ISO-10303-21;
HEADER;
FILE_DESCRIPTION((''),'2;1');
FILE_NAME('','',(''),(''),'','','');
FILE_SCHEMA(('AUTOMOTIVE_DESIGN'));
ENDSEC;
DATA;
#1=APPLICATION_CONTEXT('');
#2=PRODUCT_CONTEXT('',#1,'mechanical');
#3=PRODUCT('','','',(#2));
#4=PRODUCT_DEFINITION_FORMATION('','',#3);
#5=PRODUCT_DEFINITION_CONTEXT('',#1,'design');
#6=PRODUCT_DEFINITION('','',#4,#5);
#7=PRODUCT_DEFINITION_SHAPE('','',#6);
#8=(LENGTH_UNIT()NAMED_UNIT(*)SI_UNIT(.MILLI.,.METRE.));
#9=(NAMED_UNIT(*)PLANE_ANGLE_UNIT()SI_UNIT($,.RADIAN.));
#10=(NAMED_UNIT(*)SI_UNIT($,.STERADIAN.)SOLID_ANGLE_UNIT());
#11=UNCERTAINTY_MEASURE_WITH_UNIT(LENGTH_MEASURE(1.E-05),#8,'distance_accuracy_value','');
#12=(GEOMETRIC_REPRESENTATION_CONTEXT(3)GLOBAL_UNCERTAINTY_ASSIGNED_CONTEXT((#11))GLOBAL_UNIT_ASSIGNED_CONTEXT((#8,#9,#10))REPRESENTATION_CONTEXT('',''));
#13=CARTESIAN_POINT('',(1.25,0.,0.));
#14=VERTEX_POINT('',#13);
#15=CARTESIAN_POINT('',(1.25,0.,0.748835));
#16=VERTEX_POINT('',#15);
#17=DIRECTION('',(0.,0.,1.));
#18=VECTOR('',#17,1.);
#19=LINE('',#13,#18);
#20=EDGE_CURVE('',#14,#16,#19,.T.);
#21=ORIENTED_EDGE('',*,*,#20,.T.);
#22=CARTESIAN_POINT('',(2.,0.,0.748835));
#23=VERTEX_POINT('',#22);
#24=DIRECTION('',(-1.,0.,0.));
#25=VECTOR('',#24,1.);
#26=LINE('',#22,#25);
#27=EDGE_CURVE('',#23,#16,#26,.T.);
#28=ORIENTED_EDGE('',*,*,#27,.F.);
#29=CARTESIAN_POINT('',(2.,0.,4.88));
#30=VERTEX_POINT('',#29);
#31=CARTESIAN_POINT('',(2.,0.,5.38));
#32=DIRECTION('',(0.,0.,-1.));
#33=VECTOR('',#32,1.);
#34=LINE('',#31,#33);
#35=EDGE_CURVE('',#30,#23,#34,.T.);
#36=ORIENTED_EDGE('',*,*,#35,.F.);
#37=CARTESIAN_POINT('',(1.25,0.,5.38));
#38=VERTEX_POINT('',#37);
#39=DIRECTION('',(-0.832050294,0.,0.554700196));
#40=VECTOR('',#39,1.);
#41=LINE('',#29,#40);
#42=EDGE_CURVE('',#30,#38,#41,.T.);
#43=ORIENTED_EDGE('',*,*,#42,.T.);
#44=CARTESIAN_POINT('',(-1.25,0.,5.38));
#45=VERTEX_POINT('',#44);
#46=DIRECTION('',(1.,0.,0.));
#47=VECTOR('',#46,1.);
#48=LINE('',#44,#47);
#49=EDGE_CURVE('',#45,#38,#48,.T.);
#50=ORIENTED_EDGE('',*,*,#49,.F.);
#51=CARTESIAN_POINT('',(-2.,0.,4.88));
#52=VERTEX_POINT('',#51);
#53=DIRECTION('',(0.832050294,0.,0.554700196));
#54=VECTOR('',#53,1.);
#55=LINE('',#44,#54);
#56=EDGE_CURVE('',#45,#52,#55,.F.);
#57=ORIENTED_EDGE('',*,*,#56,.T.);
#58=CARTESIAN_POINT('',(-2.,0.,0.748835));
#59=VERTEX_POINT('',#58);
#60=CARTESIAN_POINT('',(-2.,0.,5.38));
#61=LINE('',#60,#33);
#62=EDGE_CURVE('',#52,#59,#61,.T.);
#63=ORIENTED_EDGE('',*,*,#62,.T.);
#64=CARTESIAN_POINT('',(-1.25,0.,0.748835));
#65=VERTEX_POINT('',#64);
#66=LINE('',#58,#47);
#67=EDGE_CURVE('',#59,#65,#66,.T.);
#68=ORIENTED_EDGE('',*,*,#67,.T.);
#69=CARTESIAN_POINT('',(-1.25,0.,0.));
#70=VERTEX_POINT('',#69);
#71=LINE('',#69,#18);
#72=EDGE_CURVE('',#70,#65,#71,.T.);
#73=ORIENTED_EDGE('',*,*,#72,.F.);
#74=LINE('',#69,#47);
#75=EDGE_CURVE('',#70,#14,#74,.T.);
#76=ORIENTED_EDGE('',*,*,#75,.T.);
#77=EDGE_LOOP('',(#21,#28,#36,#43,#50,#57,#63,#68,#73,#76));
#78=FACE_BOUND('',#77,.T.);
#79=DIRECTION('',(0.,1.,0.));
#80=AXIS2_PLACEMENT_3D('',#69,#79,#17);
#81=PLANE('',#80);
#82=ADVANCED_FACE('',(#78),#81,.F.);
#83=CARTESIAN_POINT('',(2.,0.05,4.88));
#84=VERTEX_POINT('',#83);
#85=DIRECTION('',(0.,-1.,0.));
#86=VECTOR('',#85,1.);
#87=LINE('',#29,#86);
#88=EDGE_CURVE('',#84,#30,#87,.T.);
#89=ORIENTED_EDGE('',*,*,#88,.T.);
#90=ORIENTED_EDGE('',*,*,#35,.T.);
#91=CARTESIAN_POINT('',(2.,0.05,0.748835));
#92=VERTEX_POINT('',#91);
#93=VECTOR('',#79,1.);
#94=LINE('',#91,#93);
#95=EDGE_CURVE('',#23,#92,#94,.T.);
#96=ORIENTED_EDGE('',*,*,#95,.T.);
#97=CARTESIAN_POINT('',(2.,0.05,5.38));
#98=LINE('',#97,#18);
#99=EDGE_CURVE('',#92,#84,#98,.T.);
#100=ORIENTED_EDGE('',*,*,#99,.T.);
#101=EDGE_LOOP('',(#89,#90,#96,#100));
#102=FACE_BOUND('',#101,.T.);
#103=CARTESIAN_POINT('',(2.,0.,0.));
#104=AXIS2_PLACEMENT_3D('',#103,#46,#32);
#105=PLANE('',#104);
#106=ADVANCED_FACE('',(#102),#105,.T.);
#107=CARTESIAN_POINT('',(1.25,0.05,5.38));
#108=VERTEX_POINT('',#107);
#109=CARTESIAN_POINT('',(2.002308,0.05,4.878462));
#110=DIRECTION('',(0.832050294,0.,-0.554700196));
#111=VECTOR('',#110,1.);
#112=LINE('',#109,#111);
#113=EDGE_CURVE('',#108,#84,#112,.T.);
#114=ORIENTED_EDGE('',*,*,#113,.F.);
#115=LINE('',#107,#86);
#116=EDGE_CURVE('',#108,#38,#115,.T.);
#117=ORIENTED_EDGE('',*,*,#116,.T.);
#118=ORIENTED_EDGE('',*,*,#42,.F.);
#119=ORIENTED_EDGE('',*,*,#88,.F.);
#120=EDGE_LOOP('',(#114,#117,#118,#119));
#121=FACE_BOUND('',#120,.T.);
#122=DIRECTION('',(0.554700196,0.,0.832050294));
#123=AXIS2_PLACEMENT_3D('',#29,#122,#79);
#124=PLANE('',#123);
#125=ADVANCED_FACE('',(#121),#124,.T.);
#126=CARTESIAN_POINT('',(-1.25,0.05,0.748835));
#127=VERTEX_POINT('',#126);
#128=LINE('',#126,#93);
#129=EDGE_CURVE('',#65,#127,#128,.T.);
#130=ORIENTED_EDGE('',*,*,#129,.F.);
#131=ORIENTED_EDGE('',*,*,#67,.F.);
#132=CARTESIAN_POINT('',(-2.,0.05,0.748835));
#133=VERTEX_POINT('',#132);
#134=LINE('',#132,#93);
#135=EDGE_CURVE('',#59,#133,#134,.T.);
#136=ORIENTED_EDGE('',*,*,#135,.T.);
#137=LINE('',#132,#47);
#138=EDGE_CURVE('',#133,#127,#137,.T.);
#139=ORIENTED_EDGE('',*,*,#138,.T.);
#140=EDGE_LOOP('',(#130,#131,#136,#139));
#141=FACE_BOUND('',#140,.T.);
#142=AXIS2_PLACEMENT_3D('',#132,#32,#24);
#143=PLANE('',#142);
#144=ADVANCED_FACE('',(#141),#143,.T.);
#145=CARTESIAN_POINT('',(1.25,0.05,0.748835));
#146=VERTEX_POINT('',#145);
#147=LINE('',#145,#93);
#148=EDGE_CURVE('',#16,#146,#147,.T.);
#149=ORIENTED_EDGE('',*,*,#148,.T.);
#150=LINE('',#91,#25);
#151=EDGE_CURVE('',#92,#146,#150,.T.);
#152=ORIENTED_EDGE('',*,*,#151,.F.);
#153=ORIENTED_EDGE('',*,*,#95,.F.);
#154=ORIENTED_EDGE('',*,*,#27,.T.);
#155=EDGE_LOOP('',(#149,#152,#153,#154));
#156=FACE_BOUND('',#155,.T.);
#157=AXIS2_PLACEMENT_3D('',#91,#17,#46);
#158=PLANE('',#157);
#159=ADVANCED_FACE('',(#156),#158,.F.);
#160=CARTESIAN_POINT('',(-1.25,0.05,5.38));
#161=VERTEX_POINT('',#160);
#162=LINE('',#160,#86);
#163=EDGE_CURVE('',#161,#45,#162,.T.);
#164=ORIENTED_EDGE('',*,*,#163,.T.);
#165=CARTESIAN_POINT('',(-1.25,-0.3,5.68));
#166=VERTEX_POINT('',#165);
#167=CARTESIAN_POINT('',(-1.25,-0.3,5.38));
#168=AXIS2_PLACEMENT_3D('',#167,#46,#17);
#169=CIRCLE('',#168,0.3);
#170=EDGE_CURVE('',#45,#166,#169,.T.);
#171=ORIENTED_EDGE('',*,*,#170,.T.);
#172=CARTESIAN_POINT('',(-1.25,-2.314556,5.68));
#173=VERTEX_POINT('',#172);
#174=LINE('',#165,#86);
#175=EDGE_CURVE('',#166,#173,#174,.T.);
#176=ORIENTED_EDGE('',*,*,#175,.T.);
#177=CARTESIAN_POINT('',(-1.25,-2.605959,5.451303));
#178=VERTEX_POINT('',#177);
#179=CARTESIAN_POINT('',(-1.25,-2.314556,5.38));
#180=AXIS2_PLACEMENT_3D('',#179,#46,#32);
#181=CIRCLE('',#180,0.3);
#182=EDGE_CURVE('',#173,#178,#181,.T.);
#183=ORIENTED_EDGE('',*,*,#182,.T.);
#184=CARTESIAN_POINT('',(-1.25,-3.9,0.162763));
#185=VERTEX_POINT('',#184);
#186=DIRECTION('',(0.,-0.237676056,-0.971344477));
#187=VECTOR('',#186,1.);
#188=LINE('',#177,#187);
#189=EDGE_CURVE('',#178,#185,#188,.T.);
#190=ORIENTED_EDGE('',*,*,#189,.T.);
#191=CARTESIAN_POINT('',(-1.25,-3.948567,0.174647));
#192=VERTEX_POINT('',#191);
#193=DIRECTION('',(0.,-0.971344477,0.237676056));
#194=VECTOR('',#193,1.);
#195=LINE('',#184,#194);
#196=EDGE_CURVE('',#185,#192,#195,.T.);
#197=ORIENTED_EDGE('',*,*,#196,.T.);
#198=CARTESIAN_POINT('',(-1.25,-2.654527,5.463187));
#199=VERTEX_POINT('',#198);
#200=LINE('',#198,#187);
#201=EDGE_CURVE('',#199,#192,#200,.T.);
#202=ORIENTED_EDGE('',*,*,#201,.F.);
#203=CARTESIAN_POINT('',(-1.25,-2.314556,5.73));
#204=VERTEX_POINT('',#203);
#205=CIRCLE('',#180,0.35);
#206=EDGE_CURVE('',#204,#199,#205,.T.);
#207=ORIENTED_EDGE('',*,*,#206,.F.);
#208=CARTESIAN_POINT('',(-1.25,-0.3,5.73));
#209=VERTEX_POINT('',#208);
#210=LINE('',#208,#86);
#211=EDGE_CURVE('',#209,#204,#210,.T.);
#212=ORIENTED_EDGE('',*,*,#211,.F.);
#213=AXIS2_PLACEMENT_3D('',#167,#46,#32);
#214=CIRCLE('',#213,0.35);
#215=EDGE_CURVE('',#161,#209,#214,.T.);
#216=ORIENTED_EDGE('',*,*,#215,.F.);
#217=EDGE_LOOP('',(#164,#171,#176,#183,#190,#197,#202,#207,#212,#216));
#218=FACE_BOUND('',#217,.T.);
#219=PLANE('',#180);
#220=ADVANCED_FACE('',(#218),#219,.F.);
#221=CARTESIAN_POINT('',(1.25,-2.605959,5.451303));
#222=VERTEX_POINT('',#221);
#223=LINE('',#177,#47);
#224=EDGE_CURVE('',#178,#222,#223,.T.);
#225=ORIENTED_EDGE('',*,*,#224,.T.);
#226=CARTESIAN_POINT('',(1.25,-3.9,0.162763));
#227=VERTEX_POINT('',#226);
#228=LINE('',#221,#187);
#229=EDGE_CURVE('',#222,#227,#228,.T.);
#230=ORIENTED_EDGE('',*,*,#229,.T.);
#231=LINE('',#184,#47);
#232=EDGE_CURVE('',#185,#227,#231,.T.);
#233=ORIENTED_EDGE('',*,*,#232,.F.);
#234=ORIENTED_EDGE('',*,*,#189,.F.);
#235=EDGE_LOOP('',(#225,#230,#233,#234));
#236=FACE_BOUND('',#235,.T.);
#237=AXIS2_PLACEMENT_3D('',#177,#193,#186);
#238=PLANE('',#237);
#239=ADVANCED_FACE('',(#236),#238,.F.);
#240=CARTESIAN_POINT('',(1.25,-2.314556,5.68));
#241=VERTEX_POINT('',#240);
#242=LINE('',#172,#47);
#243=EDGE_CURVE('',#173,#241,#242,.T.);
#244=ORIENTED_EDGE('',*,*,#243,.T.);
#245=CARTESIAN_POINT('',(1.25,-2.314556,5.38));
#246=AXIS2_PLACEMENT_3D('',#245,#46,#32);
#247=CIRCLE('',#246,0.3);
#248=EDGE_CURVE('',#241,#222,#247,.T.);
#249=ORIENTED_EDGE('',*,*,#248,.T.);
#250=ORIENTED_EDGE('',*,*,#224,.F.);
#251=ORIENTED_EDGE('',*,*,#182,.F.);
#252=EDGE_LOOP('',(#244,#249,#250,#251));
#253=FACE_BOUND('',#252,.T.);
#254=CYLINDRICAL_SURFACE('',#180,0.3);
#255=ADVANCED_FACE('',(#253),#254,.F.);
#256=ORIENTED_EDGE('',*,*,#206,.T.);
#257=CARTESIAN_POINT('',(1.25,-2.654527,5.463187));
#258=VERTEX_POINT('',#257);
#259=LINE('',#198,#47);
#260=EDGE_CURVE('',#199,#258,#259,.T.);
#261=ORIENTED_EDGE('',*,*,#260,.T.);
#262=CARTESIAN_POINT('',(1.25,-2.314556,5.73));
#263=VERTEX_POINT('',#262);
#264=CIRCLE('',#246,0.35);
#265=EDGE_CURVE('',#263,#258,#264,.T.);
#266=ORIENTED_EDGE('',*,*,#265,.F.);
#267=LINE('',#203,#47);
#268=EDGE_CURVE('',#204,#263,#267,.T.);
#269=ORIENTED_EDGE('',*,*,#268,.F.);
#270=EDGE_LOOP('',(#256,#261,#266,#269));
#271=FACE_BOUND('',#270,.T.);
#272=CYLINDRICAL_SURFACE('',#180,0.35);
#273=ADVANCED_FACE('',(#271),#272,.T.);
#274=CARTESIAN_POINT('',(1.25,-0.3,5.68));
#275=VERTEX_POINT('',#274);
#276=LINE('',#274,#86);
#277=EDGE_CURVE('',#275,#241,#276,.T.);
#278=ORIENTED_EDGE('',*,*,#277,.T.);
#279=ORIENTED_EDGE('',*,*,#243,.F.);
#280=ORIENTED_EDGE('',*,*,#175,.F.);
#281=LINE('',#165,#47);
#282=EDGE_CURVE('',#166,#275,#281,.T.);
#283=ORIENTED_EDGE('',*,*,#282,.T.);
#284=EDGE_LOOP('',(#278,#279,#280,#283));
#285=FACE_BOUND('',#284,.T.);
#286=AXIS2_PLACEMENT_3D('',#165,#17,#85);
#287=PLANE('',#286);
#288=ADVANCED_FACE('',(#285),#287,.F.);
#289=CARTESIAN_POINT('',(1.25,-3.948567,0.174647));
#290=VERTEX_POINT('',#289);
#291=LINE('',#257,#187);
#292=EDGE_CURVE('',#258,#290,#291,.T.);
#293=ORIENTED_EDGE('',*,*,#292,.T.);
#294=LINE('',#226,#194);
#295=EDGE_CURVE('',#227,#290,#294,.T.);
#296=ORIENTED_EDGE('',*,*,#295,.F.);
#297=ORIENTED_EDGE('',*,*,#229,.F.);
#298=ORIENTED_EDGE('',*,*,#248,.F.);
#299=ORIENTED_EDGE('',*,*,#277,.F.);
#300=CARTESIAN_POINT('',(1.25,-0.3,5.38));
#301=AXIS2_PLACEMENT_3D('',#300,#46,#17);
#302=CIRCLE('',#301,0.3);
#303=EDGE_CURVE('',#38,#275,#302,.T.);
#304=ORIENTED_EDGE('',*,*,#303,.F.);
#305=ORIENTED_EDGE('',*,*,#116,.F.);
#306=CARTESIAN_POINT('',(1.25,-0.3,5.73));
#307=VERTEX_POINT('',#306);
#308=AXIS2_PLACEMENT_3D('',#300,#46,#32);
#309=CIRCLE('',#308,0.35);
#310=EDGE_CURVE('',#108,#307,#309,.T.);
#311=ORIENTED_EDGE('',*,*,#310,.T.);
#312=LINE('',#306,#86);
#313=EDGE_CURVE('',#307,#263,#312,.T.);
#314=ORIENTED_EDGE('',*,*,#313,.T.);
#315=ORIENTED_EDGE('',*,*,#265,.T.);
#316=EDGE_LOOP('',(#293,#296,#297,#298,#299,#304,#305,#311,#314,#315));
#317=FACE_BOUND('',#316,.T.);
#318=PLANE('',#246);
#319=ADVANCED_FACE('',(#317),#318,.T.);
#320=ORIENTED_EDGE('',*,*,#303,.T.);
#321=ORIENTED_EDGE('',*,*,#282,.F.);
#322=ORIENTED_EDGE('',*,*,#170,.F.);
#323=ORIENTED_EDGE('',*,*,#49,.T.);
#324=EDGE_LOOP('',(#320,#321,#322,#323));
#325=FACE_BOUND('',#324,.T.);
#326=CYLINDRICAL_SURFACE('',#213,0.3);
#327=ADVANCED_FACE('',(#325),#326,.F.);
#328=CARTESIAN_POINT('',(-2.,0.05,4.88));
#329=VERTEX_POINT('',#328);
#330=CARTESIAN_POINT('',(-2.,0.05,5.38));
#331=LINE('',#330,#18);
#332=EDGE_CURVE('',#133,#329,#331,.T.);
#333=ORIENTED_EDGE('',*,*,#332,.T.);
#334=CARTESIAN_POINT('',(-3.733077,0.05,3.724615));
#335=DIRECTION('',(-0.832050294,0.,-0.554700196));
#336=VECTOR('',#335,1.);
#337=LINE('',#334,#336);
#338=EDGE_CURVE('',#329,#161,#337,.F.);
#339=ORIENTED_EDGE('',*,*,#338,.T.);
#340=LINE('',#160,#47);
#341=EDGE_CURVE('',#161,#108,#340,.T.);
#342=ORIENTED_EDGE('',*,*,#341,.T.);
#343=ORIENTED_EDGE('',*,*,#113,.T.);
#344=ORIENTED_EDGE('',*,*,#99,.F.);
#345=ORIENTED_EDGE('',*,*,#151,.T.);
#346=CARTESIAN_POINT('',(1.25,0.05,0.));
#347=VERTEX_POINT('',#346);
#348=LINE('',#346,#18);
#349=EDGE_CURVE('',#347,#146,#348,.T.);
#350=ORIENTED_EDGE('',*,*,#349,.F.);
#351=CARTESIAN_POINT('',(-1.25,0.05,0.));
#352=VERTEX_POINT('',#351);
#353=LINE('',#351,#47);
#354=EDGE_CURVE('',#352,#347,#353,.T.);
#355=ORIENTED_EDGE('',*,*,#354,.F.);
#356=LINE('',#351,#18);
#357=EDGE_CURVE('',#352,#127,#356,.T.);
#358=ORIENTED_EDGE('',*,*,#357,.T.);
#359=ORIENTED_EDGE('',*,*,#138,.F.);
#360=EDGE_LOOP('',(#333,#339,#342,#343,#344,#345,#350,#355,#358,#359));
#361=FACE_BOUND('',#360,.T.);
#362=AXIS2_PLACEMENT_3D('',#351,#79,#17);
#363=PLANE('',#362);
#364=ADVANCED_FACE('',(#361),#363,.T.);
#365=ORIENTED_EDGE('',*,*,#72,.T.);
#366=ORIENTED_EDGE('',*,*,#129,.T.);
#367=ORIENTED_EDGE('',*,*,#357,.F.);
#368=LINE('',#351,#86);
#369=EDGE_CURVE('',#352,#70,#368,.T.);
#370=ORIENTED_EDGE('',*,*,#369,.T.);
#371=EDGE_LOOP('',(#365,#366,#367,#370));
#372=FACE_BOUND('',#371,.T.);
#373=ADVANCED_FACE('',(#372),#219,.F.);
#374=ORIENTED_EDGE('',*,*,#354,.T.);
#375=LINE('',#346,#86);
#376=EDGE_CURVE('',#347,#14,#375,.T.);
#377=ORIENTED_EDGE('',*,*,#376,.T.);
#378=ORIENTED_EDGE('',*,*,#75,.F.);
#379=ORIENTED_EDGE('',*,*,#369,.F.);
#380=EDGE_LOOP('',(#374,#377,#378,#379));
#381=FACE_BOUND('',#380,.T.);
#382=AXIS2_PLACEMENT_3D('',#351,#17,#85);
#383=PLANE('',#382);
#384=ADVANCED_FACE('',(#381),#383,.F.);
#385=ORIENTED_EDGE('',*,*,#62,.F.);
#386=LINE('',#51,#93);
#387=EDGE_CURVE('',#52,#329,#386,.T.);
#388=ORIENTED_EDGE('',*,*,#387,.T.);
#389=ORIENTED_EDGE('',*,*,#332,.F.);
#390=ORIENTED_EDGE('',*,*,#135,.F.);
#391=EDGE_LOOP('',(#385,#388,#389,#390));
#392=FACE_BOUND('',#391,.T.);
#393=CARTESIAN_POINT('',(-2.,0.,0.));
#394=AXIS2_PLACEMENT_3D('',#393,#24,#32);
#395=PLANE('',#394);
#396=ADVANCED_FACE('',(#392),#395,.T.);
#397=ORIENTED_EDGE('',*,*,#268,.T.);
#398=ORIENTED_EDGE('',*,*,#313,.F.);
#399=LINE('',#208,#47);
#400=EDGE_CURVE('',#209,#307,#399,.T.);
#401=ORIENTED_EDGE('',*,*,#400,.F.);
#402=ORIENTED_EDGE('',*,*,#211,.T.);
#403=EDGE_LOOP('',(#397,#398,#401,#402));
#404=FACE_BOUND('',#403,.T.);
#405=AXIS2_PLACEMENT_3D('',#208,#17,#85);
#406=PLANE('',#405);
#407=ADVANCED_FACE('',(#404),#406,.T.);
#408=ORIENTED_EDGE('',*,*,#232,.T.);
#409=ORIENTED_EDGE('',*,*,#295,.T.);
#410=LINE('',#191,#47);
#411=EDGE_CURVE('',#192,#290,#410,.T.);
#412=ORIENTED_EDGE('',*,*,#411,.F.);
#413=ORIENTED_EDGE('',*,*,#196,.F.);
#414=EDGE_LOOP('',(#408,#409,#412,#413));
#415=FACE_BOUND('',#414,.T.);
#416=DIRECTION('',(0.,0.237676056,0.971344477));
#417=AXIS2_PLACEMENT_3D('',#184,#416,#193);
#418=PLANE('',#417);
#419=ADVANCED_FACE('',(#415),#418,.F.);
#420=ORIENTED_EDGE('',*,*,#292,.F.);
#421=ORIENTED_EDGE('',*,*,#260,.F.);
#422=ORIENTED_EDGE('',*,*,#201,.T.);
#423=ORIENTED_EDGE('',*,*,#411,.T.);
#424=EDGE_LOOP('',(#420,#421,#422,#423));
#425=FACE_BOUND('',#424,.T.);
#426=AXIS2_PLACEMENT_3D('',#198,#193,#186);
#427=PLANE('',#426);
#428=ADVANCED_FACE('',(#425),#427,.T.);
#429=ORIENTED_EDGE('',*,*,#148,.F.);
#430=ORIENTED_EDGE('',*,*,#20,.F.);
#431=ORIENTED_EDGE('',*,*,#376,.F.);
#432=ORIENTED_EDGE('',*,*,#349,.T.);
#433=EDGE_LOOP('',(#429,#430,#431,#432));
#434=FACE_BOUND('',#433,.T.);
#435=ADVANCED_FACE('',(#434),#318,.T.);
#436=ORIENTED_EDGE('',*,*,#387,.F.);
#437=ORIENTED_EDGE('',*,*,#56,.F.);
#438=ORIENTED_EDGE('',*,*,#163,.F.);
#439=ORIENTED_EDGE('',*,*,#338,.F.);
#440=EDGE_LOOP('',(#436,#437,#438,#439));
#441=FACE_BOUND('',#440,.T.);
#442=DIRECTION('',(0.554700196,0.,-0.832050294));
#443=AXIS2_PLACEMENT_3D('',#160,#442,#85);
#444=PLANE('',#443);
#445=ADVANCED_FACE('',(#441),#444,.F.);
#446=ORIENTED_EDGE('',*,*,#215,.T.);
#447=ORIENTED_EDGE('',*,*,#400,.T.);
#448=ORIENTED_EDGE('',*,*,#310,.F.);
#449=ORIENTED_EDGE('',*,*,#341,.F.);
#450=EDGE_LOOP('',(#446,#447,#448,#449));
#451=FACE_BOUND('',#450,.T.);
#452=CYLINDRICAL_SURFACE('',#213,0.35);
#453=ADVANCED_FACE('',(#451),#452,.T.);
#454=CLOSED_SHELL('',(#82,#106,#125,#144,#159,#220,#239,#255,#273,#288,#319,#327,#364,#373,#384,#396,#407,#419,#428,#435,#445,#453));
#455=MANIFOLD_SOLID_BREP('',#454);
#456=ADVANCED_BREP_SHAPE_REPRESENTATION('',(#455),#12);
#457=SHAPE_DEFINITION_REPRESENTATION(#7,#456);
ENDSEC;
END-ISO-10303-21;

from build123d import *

# Parameters (mm, degrees)
EXTRUDE_1_DEPTH      = 1.25
EXTRUDE_1_DEPTH_BACK = 1.25
SKETCH_2_W           = 4.631165465
SKETCH_2_H           = 0.05
EXTRUDE_1_2_DEPTH    = 0.75
CHAMFER_1_SIZE2      = 0.5
CHAMFER_1_SIZE       = 0.75
CHAMFER_2_SIZE2      = 0.5
CHAMFER_2_SIZE       = 0.75


with BuildPart() as part:
    # Эскиз1 → Extrude 1 (new, two sides: drawn at the far end of the back side and taken through both)
    with BuildSketch(Plane(origin=(0, 0, 0), x_dir=(0, 0, -1), z_dir=(1, 0, 0)).offset(-EXTRUDE_1_DEPTH_BACK)):
        with BuildLine():
            Line((0, 0), (-5.38, 0))
            ThreePointArc((-5.38, 0), (-5.592132034, -0.087867966), (-5.68, -0.3))
            Line((-5.68, -0.3), (-5.68, -2.314556047))
            ThreePointArc((-5.68, -2.314556047), (-5.615998777, -2.499770997), (-5.451302817, -2.60595939))
            Line((-5.451302817, -2.60595939), (-0.162763373, -3.9))
            Line((-0.162763373, -3.9), (-0.174647176, -3.948567224))
            Line((-0.174647176, -3.948567224), (-5.46318662, -2.654526614))
            ThreePointArc((-5.46318662, -2.654526614), (-5.655331906, -2.530640155), (-5.73, -2.314556047))
            Line((-5.73, -2.314556047), (-5.73, -0.3))
            ThreePointArc((-5.73, -0.3), (-5.627487373, -0.052512627), (-5.38, 0.05))
            Line((-5.38, 0.05), (0, 0.05))
            Line((0, 0.05), (0, 0))
        make_face()
    extrude(amount=EXTRUDE_1_DEPTH + EXTRUDE_1_DEPTH_BACK)

    # Эскиз2 → Extrude 1 2 (add)
    with BuildSketch(Plane(origin=(1.25, 0, 0), x_dir=(0, 0, -1), z_dir=(1, 0, 0))):
        with Locations((-3.064417268, 0.025)):
            Rectangle(SKETCH_2_W, SKETCH_2_H)
    extrude_1_2 = extrude(amount=EXTRUDE_1_2_DEPTH)

    # Фаска1
    chamfer_1_edges = [part.edges().sort_by_distance(p)[0] for p in [
        (2, 0.025, 5.38),
    ]]
    chamfer_1_side = [part.faces().sort_by_distance(p)[0] for p in [
        (1.99, 0.025, 5.38),
    ]]
    chamfer(chamfer_1_edges, length=CHAMFER_1_SIZE - 0.0001, length2=CHAMFER_1_SIZE2 - 0.0001, reference=chamfer_1_side[0])  # a hair under: the kernel refuses the full size

    # Зеркальное отражение1: Extrude 1 2 across plane
    add(extrude_1_2.mirror(Plane(origin=(0, 0, 0), x_dir=(0, 0, 1), z_dir=(1, 0, 0))))

    # Фаска2
    chamfer_2_edges = [part.edges().sort_by_distance(p)[0] for p in [
        (-2, 0.025, 5.38),
    ]]
    chamfer_2_side = [part.faces().sort_by_distance(p)[0] for p in [
        (-1.99, 0.025, 5.38),
    ]]
    chamfer(chamfer_2_edges, length=CHAMFER_2_SIZE - 0.0001, length2=CHAMFER_2_SIZE2 - 0.0001, reference=chamfer_2_side[0])  # a hair under: the kernel refuses the full size


solid = part.part
